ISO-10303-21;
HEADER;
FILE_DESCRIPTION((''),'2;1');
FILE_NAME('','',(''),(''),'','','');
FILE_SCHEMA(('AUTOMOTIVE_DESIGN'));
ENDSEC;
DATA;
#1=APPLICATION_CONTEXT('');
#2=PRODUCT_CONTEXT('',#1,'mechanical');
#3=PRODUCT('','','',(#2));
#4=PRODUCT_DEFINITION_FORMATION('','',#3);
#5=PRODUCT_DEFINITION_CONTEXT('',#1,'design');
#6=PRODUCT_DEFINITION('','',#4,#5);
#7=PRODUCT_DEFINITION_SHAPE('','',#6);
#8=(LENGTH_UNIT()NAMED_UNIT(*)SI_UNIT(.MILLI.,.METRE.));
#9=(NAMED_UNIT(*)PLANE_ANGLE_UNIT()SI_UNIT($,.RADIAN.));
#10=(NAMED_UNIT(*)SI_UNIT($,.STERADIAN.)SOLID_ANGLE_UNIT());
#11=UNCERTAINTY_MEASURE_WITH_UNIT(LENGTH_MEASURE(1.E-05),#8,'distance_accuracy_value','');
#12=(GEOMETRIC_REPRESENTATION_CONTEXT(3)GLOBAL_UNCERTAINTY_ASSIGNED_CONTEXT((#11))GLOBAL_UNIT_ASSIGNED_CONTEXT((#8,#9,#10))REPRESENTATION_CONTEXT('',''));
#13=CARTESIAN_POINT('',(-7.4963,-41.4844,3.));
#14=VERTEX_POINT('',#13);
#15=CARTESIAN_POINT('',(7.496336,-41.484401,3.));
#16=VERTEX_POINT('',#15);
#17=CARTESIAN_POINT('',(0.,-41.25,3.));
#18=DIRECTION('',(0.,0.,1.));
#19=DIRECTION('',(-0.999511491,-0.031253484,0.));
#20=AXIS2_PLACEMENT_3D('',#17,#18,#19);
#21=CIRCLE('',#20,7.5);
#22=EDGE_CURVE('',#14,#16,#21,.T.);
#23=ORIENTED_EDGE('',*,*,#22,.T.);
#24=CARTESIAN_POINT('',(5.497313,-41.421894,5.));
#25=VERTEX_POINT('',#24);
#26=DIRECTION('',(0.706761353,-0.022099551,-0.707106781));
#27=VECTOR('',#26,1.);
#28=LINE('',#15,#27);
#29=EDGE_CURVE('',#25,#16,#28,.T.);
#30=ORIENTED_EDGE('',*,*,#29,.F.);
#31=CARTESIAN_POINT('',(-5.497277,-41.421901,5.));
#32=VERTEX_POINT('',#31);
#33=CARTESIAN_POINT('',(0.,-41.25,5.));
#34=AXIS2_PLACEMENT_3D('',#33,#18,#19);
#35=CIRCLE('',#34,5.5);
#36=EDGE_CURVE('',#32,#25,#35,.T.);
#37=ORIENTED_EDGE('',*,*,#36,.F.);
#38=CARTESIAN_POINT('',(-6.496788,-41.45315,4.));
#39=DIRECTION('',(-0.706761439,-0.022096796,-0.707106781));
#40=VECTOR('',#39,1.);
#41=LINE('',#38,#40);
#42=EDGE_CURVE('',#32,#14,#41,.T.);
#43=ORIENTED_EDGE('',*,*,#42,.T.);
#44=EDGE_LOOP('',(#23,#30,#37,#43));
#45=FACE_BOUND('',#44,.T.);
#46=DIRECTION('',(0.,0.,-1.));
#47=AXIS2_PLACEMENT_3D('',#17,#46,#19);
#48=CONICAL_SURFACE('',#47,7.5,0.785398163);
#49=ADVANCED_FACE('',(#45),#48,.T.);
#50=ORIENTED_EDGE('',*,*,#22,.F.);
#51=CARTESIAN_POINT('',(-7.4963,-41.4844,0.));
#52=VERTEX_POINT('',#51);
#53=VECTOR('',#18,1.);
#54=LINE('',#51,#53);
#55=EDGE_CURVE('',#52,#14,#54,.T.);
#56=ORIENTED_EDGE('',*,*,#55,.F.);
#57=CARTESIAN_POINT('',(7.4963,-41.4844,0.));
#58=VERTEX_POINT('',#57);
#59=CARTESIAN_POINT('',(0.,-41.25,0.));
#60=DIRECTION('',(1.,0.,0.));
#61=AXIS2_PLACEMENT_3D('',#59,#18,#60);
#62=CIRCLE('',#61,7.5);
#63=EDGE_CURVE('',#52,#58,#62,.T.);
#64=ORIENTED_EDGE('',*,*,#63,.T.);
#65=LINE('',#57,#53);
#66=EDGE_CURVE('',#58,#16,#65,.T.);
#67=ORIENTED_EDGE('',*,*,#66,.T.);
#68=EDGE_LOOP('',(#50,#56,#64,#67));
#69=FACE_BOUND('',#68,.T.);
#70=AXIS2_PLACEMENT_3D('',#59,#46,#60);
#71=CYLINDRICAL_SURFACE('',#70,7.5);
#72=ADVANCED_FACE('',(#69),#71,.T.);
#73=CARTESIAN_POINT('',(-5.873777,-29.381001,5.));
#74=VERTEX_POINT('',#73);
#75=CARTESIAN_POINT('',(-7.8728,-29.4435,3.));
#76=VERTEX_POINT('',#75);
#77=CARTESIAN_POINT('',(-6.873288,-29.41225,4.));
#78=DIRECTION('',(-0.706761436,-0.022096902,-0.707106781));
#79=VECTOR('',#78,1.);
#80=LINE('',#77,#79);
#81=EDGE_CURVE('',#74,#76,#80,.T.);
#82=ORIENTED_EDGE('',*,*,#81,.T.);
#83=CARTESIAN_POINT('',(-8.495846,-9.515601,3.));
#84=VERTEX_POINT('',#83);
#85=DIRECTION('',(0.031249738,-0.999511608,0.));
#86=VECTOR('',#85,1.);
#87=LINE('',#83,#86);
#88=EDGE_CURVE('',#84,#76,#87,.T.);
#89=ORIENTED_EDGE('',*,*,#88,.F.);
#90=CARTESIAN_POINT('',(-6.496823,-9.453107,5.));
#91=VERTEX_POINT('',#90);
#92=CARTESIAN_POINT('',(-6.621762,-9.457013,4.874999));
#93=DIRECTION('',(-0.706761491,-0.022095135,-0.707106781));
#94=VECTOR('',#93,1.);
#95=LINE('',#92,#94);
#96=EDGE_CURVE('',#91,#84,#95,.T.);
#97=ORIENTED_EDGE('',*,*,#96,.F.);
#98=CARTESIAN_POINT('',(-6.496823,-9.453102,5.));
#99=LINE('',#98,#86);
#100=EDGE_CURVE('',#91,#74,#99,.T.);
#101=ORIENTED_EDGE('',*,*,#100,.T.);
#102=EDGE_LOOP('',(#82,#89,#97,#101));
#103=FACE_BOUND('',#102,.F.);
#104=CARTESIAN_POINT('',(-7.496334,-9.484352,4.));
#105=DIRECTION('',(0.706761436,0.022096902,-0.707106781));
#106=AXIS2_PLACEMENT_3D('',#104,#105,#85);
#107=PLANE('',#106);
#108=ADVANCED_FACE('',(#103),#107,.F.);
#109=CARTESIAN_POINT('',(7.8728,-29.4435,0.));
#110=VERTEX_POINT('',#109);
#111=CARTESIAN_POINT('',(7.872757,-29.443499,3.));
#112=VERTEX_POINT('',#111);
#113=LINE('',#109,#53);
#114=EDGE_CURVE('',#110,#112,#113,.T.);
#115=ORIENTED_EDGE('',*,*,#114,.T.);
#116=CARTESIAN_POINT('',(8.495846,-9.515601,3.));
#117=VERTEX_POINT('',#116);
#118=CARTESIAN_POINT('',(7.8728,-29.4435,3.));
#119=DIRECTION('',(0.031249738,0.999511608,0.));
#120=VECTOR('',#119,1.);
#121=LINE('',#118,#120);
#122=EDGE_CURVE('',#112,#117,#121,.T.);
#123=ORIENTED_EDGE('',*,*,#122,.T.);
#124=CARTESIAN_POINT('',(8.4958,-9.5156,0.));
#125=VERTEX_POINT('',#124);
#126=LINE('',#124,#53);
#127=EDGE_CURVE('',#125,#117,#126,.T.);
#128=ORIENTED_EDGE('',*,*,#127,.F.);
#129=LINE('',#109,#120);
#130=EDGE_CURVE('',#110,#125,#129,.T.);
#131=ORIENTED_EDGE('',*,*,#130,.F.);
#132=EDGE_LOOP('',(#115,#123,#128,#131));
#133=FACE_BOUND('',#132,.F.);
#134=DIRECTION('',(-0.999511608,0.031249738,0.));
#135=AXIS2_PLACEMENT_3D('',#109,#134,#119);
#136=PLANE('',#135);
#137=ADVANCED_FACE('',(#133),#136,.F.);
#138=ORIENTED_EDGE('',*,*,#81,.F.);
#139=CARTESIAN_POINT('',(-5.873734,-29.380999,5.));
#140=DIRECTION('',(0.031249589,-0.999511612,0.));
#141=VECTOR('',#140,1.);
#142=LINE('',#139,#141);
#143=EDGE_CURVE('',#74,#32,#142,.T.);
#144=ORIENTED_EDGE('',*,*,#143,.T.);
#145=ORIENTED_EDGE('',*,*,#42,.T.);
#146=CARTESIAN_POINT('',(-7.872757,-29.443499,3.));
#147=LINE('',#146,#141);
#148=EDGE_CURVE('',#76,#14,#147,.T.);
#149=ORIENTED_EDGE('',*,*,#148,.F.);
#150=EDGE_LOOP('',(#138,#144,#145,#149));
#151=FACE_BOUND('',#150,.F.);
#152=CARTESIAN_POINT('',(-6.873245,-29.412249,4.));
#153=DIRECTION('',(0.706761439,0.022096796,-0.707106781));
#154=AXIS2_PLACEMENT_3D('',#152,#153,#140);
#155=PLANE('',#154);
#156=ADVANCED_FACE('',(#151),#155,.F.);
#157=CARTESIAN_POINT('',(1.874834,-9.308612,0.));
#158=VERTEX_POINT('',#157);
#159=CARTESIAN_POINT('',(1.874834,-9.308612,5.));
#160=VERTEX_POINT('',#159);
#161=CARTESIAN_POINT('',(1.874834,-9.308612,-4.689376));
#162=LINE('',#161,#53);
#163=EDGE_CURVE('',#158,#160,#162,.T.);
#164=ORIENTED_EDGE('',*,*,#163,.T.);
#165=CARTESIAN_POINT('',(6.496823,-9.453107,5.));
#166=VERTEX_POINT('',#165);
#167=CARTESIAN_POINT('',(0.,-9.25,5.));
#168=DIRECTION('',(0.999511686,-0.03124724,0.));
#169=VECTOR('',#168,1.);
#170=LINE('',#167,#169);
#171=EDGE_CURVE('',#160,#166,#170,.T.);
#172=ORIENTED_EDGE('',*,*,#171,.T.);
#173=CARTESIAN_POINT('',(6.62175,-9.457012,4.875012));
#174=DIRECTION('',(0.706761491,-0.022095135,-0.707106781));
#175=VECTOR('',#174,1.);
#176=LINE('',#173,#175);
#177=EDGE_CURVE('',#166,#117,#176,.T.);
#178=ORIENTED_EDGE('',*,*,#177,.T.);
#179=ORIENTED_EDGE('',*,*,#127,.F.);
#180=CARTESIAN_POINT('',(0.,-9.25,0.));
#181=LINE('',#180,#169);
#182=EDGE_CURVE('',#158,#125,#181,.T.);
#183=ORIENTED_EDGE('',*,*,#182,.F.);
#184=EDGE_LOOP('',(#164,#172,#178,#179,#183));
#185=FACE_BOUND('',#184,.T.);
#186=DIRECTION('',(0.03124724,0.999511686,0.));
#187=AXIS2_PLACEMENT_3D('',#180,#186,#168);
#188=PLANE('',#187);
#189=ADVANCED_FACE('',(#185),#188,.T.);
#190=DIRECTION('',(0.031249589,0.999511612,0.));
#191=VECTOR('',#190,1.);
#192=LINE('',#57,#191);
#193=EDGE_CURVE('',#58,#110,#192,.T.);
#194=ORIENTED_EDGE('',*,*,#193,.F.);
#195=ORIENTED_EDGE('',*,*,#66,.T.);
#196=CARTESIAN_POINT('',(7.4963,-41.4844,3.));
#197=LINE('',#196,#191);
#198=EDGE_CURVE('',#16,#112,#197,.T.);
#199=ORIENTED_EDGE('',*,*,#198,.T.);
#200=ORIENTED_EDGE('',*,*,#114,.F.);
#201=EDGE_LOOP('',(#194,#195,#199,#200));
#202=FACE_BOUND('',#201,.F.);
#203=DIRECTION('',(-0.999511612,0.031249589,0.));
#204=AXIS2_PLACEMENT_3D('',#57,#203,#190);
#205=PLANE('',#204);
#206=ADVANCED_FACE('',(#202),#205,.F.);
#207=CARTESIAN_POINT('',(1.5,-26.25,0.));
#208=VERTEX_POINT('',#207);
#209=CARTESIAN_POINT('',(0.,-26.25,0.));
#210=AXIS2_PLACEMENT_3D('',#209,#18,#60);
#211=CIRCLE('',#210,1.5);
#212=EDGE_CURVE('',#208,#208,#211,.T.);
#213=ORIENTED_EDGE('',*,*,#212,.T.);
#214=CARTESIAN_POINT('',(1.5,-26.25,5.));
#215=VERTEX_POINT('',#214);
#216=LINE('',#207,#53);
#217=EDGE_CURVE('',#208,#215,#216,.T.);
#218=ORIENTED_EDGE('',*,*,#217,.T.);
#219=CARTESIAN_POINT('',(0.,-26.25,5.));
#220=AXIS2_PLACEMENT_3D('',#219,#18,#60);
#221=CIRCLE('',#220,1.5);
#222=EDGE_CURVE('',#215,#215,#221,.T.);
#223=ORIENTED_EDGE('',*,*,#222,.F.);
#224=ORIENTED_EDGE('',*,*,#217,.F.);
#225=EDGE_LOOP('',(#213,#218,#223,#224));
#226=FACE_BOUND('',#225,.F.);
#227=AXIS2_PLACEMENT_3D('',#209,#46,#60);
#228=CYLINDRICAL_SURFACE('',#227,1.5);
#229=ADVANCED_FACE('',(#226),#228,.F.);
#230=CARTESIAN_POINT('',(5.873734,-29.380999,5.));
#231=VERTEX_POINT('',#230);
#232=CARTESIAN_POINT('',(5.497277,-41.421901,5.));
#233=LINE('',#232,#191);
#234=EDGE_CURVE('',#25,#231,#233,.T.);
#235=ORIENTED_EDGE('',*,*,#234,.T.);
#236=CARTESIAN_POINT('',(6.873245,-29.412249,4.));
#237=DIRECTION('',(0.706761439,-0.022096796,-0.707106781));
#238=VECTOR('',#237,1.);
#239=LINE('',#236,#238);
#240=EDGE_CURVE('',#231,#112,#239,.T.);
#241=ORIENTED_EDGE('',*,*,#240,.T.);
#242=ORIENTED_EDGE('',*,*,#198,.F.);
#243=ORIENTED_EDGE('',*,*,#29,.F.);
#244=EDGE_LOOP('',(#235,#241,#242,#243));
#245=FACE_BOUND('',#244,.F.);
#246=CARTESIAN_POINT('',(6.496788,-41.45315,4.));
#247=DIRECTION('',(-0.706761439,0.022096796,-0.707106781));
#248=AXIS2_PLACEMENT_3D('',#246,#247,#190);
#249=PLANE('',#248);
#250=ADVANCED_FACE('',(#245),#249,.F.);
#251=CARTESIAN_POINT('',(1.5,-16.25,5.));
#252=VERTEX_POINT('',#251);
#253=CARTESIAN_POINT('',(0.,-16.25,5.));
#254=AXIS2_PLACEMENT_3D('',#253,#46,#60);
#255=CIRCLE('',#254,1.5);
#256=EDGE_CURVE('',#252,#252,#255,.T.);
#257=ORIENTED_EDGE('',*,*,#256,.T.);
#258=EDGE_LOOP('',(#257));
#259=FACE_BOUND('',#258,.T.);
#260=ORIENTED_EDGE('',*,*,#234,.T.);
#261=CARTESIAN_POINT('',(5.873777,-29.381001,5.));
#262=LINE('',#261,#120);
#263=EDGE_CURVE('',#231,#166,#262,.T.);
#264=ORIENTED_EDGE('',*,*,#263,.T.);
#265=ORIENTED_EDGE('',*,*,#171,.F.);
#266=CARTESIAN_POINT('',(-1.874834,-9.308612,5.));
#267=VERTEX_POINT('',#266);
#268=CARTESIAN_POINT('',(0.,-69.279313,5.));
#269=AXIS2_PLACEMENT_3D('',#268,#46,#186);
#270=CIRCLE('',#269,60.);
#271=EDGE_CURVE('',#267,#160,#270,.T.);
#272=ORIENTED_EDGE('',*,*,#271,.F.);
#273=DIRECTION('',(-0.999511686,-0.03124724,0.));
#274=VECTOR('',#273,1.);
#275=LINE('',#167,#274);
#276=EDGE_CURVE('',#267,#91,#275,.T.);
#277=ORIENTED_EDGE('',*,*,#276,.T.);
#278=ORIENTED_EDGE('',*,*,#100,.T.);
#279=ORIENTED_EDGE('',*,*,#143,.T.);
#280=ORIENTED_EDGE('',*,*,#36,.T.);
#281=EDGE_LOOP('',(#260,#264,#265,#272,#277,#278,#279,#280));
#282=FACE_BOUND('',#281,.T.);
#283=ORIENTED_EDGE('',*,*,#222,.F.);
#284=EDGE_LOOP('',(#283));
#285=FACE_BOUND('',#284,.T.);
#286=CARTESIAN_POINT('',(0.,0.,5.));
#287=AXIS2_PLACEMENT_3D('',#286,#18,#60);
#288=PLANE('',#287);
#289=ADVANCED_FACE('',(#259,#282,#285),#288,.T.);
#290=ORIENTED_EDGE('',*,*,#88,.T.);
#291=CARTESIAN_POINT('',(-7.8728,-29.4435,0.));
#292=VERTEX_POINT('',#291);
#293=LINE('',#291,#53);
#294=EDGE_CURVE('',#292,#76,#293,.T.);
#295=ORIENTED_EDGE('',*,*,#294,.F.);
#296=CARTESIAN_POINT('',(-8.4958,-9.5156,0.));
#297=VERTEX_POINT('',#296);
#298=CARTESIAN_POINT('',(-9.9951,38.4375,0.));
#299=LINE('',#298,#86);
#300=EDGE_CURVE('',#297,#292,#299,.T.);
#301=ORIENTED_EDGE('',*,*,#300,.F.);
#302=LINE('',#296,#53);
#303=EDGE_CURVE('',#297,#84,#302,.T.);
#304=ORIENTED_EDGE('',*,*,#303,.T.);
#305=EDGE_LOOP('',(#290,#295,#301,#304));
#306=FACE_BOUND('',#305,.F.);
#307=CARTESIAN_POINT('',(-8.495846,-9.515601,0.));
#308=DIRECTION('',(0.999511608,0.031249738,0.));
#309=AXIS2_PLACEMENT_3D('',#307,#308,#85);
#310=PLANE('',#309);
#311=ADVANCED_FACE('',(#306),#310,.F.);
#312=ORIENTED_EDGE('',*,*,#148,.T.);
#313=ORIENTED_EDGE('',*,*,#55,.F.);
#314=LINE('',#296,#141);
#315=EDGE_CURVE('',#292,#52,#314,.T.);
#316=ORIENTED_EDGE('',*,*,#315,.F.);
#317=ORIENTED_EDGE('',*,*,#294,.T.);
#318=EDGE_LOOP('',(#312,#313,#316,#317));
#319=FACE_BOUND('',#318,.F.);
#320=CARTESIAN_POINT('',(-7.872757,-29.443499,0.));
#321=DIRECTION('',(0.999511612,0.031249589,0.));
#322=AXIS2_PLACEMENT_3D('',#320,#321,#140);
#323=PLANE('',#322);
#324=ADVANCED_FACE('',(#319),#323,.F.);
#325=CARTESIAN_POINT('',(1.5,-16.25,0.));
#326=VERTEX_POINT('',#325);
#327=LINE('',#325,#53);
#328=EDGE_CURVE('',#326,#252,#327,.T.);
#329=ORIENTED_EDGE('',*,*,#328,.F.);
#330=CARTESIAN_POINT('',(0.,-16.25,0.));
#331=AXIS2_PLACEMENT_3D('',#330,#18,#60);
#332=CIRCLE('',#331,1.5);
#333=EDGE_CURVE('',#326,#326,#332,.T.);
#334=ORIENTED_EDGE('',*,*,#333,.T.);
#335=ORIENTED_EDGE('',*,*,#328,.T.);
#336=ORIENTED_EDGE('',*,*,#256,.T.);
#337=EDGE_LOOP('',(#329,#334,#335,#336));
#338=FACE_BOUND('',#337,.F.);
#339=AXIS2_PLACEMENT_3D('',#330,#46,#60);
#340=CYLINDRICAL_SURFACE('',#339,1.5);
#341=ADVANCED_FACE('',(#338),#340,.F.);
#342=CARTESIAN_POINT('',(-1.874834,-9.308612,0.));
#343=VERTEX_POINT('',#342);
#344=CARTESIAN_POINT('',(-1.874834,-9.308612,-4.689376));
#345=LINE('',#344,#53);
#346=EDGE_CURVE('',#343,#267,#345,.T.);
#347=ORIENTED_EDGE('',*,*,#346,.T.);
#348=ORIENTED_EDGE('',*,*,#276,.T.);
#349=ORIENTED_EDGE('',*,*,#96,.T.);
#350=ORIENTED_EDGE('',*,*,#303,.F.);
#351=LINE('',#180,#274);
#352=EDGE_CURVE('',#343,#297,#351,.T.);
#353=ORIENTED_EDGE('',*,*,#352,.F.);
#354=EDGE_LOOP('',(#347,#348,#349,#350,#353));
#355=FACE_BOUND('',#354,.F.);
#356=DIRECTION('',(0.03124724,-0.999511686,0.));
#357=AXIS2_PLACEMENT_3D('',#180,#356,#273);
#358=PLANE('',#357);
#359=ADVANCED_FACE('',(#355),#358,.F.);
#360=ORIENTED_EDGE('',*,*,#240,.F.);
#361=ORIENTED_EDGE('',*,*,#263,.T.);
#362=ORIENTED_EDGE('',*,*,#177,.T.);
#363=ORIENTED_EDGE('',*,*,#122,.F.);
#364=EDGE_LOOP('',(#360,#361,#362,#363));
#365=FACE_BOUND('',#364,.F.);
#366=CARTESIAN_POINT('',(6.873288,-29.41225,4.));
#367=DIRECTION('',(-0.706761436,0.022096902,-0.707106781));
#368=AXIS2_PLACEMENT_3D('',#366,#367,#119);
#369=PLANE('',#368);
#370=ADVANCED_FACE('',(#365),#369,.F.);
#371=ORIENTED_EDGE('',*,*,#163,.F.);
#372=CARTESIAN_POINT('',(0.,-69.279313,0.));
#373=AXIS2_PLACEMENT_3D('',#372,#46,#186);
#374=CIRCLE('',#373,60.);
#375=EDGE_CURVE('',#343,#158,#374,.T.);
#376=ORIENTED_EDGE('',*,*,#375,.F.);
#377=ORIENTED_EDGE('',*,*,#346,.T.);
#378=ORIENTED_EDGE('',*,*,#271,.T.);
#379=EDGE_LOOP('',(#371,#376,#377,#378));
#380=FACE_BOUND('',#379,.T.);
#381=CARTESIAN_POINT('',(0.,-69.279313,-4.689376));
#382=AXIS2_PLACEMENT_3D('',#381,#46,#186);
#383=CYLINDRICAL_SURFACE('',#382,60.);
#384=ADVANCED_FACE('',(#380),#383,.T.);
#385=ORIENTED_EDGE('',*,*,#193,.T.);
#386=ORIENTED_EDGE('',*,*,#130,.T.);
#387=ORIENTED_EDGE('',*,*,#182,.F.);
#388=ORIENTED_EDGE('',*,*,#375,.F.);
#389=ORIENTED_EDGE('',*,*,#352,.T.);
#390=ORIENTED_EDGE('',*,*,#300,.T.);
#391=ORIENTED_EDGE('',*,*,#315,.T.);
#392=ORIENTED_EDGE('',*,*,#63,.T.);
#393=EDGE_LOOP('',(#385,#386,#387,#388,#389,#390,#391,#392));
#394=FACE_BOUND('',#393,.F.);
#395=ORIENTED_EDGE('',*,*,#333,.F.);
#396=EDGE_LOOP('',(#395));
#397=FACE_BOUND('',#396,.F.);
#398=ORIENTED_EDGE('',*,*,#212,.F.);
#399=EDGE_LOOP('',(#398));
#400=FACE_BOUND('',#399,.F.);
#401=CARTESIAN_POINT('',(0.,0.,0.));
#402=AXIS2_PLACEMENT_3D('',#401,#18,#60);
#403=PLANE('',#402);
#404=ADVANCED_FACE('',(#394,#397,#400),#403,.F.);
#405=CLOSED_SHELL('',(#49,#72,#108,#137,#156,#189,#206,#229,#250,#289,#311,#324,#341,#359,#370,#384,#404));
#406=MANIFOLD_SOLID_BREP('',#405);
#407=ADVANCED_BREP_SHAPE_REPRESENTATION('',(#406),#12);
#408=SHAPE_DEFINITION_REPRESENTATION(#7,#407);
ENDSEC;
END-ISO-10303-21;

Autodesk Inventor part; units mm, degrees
ref_plane "YZ Plane" through (0, 0, 0) normal (1, 0, 0) x (0, 1, 0)
ref_plane "XZ Plane" through (0, 0, 0) normal (0, 1, 0) x (-1, 0, 0)
ref_plane "XY Plane" through (0, 0, 0) normal (0, 0, 1) x (1, 0, 0)
sketch "Sketch1" plane through (0, 0, 0) normal (0, 0, 1) x (1, 0, 0)
  line L0 (-4.4434, -31.1874) -> (-7.8728, -29.4435) projected
  arc A0 (4.4434, -31.1874) -> (-4.4434, -31.1874) centre (0, -41.25) ccw projected
  line L1 (7.8728, -29.4435) -> (4.4434, -31.1874) projected
  line L2 (7.8728, -29.4435) -> (9.9951, 38.4375) projected
  arc A1 (9.9951, 38.4375) -> (-9.9951, 38.4375) centre (0, 38.75) ccw projected
  line L3 (-9.9951, 38.4375) -> (-7.8728, -29.4435) projected
  circle A2 centre (0, -26.25) radius 1.5 projected
  circle A3 centre (0, -16.25) radius 1.5 projected
  circle A4 centre (0, -41.25) radius 7.5
  line L4 (0, -16.25) -> (0, -9.25)
  line L5 (0, -9.25) -> (8.4958, -9.5156)
  line L6 (0, -9.25) -> (-8.4958, -9.5156)
  line L7 (0, -41.25) -> (7.4963, -41.4844)
  line L8 (0, -41.25) -> (-7.4963, -41.4844)
  line L9 (-8.4958, -9.5156) -> (-7.4963, -41.4844)
  line L10 (7.4963, -41.4844) -> (8.4958, -9.5156)
  arc A5 (-7.4963, -41.4844) -> (7.4963, -41.4844) centre (0, -41.25) ccw
  point P0 (0, 0)
  dimension "d0" = 15
  dimension "d1" = 7
  dimension "d2" = 7.5
extrude "Extrusion1" add sketch "Sketch1" along normal blind 5 contours A0 L1 L10 A4 L9 L0 | L0 L3 L6 L5 L2 L1 A0 | L8 L7 A4 | A4 L7 L8
chamfer "Chamfer1" distance 2 angle 45 3 edges at (-8.1843, -19.4796, 5) (0, -48.75, 5) (8.1843, -19.4796, 5)
fillet "Fillet1" radius 60 1 edges at (0, -9.25, 2.5)
properties part number "leg_bone_2"
